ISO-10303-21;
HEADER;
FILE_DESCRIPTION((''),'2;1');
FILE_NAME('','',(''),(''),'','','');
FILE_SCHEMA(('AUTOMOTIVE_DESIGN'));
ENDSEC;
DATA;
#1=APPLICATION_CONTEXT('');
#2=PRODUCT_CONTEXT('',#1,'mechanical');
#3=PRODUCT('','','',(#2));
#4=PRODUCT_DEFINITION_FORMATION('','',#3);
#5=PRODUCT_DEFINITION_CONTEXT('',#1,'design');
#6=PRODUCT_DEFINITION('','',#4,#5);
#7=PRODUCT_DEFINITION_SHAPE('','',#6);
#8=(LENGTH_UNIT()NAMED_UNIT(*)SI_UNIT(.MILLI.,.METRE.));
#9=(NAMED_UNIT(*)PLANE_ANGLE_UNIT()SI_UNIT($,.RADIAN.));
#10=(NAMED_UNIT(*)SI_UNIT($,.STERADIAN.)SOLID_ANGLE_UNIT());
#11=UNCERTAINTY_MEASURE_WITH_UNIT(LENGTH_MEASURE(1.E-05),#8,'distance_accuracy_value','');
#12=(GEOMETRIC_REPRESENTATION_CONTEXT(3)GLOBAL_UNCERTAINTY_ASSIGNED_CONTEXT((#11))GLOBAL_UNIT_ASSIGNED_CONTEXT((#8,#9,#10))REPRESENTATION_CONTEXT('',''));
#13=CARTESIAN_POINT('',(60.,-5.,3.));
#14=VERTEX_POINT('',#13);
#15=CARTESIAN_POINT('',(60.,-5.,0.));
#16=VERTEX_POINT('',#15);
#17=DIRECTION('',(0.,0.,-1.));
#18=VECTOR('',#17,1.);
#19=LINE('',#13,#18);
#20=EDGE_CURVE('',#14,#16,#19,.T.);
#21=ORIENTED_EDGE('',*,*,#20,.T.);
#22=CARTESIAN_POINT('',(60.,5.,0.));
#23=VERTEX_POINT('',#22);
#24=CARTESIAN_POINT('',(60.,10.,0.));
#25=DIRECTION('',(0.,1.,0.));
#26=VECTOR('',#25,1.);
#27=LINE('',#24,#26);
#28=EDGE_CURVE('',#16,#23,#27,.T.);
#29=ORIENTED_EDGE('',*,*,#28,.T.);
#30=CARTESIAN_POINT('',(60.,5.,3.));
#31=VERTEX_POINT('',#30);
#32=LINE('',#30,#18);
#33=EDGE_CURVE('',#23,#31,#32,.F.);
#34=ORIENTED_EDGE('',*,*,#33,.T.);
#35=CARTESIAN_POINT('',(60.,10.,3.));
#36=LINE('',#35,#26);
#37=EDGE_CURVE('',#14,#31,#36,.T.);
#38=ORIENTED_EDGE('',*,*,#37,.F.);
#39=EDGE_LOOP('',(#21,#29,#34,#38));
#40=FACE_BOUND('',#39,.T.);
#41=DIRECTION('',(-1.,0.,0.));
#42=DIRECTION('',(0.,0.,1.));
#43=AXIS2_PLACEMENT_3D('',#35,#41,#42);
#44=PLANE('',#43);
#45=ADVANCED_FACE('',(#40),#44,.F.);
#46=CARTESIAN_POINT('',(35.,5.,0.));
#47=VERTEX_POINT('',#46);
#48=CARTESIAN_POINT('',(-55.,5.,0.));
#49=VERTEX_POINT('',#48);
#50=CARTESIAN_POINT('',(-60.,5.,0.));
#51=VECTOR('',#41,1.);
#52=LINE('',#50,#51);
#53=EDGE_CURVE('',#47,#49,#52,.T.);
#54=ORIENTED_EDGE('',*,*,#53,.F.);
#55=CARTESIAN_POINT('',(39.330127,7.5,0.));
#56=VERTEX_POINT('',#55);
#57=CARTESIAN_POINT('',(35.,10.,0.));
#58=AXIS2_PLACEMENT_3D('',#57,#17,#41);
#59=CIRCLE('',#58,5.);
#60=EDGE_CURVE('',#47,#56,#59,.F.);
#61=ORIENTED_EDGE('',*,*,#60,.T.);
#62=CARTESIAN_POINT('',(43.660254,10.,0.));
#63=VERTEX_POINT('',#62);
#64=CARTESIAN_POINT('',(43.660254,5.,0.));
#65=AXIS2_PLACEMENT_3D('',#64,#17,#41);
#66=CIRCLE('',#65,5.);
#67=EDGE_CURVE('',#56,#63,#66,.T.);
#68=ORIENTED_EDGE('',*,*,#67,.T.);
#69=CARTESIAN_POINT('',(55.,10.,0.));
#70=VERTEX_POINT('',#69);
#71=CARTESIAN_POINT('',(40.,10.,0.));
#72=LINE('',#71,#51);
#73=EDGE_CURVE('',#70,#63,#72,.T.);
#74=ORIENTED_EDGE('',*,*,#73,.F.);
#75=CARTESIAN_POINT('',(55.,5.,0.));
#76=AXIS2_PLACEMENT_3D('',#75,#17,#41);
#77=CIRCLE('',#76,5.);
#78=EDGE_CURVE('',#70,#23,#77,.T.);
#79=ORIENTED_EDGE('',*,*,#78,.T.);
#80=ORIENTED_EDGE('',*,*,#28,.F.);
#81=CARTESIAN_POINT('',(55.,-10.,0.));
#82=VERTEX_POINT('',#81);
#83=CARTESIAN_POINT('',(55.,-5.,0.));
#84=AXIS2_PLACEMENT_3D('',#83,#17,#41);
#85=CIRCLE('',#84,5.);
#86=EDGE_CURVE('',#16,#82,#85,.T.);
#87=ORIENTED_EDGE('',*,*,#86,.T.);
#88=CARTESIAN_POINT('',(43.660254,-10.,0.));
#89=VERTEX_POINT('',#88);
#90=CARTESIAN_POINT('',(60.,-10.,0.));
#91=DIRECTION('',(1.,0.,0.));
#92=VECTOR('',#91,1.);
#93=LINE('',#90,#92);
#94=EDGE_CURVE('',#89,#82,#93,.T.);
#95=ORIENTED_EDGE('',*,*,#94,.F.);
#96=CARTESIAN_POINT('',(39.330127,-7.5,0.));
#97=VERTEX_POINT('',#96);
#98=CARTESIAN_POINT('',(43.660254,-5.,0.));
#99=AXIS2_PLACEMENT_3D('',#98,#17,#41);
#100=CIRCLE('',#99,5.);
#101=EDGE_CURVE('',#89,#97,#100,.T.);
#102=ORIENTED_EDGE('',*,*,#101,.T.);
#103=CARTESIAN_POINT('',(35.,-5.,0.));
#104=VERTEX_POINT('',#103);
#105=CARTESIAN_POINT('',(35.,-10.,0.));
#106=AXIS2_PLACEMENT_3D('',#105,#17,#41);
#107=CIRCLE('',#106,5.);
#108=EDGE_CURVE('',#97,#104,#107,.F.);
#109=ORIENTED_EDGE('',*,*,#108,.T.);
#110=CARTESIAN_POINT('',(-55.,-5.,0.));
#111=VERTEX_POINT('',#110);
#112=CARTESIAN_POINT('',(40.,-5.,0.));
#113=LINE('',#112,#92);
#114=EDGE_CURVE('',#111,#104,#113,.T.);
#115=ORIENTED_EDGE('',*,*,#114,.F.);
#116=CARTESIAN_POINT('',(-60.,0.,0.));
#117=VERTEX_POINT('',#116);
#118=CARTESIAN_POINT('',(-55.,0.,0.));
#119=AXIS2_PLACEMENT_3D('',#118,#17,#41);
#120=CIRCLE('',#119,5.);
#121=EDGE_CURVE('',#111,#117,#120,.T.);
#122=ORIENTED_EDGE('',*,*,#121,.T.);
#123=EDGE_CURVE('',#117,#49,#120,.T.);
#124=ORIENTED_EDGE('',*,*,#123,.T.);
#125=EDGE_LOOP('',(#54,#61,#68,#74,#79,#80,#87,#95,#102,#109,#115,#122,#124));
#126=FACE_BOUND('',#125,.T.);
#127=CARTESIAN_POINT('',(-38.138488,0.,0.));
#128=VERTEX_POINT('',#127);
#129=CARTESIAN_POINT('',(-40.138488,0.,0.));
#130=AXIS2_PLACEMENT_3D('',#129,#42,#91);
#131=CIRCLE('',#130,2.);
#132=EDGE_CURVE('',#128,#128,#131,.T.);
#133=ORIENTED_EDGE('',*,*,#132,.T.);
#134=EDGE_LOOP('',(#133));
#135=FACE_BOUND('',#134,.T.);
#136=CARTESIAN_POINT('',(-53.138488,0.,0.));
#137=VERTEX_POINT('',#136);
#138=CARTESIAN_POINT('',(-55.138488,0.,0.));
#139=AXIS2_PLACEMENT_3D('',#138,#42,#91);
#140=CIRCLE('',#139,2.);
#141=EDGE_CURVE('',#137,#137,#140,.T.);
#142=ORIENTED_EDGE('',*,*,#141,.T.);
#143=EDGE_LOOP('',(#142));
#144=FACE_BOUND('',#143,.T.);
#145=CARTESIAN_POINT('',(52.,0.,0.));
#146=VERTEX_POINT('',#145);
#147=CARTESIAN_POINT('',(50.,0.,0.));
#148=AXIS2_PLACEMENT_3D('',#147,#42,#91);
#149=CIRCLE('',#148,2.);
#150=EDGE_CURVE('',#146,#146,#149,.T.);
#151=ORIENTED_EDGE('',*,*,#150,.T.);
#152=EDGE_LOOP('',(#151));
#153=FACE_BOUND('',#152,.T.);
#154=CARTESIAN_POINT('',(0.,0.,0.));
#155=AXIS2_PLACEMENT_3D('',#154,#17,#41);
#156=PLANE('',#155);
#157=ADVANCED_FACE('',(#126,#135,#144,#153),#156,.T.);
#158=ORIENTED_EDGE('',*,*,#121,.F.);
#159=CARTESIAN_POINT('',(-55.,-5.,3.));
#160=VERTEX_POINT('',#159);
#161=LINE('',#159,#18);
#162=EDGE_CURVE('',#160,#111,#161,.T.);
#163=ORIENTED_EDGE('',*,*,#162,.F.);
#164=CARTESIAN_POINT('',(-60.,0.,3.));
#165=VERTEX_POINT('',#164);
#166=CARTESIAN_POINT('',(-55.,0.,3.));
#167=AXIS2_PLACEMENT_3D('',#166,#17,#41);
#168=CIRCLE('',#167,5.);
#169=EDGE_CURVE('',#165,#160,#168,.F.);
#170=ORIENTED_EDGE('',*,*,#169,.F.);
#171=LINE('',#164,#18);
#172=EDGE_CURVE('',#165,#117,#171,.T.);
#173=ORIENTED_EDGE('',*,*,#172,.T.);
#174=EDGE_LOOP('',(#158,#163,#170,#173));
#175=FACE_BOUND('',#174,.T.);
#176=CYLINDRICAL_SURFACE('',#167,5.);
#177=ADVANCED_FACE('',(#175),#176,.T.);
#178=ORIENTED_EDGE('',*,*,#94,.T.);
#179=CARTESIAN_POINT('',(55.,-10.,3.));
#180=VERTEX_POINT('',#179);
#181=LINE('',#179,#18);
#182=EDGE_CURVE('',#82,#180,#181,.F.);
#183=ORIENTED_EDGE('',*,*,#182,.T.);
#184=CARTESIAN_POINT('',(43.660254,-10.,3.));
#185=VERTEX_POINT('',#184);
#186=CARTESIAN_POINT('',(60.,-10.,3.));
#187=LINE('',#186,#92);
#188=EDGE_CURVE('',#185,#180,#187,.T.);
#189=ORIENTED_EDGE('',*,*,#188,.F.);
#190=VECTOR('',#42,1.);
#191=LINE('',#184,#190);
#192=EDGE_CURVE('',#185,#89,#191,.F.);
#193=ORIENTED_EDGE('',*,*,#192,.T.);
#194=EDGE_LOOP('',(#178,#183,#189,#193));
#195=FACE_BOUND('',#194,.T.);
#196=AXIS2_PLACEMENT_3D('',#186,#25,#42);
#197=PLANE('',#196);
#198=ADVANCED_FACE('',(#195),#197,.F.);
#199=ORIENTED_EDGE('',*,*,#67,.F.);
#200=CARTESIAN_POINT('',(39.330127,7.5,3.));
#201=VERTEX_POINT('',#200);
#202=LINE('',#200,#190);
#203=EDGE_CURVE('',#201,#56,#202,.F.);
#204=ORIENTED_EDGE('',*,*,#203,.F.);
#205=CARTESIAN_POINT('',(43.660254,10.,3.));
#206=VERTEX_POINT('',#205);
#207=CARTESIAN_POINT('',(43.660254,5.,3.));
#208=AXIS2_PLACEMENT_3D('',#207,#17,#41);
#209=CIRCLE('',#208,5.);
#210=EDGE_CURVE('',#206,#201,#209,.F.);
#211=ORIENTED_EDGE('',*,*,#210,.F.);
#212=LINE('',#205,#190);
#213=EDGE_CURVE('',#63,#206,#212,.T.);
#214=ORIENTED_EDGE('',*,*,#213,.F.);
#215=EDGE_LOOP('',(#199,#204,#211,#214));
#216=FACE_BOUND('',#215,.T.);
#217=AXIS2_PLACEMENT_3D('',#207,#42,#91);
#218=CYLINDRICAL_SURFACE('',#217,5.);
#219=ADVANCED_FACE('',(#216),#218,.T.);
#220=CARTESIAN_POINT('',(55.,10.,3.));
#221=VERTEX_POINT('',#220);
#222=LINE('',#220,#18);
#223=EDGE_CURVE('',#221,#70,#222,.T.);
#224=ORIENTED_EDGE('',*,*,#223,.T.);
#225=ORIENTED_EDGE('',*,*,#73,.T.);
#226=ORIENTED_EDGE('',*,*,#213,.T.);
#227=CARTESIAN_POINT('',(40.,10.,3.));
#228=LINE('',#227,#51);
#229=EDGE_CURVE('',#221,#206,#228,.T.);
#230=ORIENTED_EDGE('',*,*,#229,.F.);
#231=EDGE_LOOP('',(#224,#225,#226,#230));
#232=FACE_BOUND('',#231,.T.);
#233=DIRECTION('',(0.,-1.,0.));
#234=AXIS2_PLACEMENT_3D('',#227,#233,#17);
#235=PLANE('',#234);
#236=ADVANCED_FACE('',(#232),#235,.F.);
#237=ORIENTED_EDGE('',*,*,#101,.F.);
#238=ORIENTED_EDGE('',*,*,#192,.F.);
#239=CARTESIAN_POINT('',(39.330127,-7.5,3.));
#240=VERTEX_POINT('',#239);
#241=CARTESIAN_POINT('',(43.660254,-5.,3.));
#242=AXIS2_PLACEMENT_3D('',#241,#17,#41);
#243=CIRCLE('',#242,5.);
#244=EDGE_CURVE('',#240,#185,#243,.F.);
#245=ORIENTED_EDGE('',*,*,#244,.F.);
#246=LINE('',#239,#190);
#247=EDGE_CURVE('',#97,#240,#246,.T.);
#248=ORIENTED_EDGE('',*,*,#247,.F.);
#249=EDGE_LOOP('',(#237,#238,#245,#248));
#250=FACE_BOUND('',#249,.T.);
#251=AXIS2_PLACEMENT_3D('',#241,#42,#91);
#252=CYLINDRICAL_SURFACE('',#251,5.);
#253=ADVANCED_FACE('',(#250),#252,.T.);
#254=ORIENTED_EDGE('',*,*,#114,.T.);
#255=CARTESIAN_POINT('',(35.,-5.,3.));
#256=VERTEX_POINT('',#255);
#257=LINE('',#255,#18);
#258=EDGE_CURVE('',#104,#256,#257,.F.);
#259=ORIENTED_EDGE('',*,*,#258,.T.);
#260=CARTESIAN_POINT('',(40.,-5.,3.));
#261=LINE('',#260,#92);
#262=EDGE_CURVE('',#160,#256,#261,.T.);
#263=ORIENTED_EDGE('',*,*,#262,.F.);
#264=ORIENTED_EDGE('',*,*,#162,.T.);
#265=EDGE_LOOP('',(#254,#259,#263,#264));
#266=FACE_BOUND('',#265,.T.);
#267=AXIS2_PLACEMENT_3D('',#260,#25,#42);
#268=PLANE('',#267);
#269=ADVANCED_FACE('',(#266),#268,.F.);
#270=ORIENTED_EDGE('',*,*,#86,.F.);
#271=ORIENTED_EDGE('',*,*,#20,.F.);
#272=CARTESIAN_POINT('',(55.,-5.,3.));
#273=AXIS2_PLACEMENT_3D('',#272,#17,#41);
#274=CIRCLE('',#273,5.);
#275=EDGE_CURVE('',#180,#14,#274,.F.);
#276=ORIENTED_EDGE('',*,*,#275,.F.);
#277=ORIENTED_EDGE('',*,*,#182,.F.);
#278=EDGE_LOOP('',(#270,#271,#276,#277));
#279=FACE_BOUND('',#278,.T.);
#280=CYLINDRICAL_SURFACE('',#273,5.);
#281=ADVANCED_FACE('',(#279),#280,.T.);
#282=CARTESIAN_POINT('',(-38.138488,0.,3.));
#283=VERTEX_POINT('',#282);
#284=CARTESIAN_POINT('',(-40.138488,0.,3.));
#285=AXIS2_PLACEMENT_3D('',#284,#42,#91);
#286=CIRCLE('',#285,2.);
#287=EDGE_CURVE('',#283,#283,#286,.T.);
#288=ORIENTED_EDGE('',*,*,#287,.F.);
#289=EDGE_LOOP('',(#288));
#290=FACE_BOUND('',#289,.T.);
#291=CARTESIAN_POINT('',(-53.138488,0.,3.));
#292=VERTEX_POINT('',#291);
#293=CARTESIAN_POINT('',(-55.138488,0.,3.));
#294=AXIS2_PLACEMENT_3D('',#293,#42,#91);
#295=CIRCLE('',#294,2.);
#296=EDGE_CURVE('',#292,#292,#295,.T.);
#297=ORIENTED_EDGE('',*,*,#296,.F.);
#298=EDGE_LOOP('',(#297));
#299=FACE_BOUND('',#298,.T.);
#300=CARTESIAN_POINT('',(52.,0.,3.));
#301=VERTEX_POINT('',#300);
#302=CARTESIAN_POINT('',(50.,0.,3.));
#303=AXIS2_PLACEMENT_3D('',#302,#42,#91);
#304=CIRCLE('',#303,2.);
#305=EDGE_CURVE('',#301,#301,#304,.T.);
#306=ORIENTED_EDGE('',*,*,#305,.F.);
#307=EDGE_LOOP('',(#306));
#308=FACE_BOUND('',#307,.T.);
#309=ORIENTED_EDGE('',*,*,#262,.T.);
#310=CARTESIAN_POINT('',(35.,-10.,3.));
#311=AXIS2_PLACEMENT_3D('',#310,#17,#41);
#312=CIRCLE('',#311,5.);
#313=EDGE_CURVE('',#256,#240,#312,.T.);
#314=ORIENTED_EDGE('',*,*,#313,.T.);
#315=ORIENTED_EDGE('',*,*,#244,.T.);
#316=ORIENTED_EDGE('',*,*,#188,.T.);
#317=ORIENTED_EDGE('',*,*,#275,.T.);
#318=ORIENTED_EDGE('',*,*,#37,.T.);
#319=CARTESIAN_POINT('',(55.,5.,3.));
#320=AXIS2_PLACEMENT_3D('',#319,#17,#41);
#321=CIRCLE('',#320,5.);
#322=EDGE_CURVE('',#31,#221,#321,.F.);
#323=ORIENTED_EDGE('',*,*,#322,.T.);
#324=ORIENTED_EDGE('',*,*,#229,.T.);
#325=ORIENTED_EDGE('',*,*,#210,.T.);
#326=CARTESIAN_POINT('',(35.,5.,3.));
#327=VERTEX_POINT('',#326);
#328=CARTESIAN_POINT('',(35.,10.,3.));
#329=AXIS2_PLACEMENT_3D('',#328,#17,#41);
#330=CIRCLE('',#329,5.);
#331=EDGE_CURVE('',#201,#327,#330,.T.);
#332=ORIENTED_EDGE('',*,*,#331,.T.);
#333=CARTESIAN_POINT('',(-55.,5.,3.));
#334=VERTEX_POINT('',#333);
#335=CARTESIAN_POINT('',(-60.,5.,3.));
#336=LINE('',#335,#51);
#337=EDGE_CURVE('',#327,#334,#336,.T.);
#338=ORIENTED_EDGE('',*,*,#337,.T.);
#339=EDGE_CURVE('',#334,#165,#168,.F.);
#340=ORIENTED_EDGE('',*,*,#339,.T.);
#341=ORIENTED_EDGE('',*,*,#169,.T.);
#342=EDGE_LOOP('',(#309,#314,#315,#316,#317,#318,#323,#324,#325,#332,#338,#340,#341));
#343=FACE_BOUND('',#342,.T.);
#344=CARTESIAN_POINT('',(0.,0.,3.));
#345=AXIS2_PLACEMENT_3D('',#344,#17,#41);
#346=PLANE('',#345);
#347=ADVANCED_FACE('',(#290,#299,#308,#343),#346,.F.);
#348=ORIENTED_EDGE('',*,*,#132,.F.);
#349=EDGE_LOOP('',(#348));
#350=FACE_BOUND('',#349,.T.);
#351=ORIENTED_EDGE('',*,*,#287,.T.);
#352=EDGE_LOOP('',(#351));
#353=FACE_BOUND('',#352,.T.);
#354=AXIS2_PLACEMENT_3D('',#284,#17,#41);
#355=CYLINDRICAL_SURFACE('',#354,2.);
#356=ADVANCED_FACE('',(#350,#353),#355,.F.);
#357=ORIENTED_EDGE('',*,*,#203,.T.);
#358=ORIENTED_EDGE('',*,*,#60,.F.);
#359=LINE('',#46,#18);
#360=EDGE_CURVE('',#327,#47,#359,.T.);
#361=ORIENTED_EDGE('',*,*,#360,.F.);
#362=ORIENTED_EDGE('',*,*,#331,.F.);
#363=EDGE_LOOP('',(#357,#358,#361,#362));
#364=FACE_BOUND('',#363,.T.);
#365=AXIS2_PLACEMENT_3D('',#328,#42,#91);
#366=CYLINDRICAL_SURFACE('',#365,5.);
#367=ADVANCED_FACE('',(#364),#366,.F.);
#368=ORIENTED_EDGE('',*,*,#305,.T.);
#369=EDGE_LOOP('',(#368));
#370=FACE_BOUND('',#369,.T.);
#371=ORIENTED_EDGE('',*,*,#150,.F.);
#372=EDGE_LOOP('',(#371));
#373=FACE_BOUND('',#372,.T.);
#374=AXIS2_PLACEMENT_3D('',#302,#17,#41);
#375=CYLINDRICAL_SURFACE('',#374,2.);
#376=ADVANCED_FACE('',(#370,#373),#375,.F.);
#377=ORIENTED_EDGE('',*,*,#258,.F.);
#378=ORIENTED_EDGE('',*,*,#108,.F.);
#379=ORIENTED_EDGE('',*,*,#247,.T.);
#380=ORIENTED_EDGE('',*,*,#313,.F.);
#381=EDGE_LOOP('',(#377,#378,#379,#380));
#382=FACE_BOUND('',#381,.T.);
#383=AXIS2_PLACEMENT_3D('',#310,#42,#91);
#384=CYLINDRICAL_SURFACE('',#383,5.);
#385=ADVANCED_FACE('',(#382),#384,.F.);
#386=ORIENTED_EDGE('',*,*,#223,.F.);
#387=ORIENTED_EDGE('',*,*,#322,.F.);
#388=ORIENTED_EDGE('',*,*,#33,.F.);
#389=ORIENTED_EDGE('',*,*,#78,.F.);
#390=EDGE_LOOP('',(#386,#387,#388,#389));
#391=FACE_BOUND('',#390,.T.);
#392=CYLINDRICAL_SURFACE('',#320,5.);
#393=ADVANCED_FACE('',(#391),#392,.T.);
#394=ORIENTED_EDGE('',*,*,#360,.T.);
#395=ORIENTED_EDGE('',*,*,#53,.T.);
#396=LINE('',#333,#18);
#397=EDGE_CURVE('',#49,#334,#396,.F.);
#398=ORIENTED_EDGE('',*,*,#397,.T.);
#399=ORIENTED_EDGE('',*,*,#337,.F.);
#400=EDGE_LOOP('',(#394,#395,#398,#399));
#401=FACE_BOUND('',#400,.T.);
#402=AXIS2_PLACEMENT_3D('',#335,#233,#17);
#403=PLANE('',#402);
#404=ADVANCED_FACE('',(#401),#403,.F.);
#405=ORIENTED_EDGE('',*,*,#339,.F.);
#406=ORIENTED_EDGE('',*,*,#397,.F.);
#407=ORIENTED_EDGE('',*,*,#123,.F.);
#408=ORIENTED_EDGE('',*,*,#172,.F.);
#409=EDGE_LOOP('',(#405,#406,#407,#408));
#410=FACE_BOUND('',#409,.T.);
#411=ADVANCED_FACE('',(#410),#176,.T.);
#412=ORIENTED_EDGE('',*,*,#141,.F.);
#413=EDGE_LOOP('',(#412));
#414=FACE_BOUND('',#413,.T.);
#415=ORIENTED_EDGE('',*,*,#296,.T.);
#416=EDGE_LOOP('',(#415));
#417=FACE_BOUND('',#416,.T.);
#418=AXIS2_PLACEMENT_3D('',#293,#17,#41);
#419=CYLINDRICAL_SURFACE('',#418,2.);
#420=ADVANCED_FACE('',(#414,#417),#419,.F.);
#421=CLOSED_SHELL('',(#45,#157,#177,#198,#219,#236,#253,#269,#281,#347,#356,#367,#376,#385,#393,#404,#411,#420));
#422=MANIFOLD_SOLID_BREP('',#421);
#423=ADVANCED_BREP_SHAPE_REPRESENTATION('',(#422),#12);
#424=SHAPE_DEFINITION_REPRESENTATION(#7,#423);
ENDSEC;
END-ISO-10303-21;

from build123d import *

# Parameters (mm, degrees)
SKETCH_1_R      = 2
EXTRUDE_1_DEPTH = 3
FILLET_2_R      = 5
FILLET_3_R      = 5
FILLET_4_R      = 5


with BuildPart() as part:
    # 草图1 → 凸台-拉伸1 (new body)
    with BuildSketch(Plane.XY):
        Polygon((-60, 5), (40, 5), (40, 10), (60, 10), (60, -10), (40, -10), (40, -5), (-60, -5), align=None)
        with Locations((-55.138487595, 0)):
            Circle(SKETCH_1_R, mode=Mode.SUBTRACT)
        with Locations((-40.138487595, 0)):
            Circle(SKETCH_1_R, mode=Mode.SUBTRACT)
        with Locations((50, 0)):
            Circle(SKETCH_1_R, mode=Mode.SUBTRACT)
    extrude(amount=EXTRUDE_1_DEPTH)

    # 圆角2
    fillet_2_edges = [part.edges().sort_by_distance(p)[0] for p in [
        (-60, -5, 1.5),
        (-60, 5, 1.5),
        (60, -10, 1.5),
        (60, 10, 1.5),
    ]]
    fillet(fillet_2_edges, radius=FILLET_2_R - 0.0001)  # a hair under: the kernel refuses the full size

    # 圆角3
    fillet_3_edges = [part.edges().sort_by_distance(p)[0] for p in [
        (40, -5, 1.5),
        (40, 5, 1.5),
    ]]
    fillet(fillet_3_edges, radius=FILLET_3_R - 0.0001)  # a hair under: the kernel refuses the full size

    # 圆角4
    fillet_4_edges = [part.edges().sort_by_distance(p)[0] for p in [
        (40, -10, 1.5),
        (40, 10, 1.5),
    ]]
    fillet(fillet_4_edges, radius=FILLET_4_R)


solid = part.part
